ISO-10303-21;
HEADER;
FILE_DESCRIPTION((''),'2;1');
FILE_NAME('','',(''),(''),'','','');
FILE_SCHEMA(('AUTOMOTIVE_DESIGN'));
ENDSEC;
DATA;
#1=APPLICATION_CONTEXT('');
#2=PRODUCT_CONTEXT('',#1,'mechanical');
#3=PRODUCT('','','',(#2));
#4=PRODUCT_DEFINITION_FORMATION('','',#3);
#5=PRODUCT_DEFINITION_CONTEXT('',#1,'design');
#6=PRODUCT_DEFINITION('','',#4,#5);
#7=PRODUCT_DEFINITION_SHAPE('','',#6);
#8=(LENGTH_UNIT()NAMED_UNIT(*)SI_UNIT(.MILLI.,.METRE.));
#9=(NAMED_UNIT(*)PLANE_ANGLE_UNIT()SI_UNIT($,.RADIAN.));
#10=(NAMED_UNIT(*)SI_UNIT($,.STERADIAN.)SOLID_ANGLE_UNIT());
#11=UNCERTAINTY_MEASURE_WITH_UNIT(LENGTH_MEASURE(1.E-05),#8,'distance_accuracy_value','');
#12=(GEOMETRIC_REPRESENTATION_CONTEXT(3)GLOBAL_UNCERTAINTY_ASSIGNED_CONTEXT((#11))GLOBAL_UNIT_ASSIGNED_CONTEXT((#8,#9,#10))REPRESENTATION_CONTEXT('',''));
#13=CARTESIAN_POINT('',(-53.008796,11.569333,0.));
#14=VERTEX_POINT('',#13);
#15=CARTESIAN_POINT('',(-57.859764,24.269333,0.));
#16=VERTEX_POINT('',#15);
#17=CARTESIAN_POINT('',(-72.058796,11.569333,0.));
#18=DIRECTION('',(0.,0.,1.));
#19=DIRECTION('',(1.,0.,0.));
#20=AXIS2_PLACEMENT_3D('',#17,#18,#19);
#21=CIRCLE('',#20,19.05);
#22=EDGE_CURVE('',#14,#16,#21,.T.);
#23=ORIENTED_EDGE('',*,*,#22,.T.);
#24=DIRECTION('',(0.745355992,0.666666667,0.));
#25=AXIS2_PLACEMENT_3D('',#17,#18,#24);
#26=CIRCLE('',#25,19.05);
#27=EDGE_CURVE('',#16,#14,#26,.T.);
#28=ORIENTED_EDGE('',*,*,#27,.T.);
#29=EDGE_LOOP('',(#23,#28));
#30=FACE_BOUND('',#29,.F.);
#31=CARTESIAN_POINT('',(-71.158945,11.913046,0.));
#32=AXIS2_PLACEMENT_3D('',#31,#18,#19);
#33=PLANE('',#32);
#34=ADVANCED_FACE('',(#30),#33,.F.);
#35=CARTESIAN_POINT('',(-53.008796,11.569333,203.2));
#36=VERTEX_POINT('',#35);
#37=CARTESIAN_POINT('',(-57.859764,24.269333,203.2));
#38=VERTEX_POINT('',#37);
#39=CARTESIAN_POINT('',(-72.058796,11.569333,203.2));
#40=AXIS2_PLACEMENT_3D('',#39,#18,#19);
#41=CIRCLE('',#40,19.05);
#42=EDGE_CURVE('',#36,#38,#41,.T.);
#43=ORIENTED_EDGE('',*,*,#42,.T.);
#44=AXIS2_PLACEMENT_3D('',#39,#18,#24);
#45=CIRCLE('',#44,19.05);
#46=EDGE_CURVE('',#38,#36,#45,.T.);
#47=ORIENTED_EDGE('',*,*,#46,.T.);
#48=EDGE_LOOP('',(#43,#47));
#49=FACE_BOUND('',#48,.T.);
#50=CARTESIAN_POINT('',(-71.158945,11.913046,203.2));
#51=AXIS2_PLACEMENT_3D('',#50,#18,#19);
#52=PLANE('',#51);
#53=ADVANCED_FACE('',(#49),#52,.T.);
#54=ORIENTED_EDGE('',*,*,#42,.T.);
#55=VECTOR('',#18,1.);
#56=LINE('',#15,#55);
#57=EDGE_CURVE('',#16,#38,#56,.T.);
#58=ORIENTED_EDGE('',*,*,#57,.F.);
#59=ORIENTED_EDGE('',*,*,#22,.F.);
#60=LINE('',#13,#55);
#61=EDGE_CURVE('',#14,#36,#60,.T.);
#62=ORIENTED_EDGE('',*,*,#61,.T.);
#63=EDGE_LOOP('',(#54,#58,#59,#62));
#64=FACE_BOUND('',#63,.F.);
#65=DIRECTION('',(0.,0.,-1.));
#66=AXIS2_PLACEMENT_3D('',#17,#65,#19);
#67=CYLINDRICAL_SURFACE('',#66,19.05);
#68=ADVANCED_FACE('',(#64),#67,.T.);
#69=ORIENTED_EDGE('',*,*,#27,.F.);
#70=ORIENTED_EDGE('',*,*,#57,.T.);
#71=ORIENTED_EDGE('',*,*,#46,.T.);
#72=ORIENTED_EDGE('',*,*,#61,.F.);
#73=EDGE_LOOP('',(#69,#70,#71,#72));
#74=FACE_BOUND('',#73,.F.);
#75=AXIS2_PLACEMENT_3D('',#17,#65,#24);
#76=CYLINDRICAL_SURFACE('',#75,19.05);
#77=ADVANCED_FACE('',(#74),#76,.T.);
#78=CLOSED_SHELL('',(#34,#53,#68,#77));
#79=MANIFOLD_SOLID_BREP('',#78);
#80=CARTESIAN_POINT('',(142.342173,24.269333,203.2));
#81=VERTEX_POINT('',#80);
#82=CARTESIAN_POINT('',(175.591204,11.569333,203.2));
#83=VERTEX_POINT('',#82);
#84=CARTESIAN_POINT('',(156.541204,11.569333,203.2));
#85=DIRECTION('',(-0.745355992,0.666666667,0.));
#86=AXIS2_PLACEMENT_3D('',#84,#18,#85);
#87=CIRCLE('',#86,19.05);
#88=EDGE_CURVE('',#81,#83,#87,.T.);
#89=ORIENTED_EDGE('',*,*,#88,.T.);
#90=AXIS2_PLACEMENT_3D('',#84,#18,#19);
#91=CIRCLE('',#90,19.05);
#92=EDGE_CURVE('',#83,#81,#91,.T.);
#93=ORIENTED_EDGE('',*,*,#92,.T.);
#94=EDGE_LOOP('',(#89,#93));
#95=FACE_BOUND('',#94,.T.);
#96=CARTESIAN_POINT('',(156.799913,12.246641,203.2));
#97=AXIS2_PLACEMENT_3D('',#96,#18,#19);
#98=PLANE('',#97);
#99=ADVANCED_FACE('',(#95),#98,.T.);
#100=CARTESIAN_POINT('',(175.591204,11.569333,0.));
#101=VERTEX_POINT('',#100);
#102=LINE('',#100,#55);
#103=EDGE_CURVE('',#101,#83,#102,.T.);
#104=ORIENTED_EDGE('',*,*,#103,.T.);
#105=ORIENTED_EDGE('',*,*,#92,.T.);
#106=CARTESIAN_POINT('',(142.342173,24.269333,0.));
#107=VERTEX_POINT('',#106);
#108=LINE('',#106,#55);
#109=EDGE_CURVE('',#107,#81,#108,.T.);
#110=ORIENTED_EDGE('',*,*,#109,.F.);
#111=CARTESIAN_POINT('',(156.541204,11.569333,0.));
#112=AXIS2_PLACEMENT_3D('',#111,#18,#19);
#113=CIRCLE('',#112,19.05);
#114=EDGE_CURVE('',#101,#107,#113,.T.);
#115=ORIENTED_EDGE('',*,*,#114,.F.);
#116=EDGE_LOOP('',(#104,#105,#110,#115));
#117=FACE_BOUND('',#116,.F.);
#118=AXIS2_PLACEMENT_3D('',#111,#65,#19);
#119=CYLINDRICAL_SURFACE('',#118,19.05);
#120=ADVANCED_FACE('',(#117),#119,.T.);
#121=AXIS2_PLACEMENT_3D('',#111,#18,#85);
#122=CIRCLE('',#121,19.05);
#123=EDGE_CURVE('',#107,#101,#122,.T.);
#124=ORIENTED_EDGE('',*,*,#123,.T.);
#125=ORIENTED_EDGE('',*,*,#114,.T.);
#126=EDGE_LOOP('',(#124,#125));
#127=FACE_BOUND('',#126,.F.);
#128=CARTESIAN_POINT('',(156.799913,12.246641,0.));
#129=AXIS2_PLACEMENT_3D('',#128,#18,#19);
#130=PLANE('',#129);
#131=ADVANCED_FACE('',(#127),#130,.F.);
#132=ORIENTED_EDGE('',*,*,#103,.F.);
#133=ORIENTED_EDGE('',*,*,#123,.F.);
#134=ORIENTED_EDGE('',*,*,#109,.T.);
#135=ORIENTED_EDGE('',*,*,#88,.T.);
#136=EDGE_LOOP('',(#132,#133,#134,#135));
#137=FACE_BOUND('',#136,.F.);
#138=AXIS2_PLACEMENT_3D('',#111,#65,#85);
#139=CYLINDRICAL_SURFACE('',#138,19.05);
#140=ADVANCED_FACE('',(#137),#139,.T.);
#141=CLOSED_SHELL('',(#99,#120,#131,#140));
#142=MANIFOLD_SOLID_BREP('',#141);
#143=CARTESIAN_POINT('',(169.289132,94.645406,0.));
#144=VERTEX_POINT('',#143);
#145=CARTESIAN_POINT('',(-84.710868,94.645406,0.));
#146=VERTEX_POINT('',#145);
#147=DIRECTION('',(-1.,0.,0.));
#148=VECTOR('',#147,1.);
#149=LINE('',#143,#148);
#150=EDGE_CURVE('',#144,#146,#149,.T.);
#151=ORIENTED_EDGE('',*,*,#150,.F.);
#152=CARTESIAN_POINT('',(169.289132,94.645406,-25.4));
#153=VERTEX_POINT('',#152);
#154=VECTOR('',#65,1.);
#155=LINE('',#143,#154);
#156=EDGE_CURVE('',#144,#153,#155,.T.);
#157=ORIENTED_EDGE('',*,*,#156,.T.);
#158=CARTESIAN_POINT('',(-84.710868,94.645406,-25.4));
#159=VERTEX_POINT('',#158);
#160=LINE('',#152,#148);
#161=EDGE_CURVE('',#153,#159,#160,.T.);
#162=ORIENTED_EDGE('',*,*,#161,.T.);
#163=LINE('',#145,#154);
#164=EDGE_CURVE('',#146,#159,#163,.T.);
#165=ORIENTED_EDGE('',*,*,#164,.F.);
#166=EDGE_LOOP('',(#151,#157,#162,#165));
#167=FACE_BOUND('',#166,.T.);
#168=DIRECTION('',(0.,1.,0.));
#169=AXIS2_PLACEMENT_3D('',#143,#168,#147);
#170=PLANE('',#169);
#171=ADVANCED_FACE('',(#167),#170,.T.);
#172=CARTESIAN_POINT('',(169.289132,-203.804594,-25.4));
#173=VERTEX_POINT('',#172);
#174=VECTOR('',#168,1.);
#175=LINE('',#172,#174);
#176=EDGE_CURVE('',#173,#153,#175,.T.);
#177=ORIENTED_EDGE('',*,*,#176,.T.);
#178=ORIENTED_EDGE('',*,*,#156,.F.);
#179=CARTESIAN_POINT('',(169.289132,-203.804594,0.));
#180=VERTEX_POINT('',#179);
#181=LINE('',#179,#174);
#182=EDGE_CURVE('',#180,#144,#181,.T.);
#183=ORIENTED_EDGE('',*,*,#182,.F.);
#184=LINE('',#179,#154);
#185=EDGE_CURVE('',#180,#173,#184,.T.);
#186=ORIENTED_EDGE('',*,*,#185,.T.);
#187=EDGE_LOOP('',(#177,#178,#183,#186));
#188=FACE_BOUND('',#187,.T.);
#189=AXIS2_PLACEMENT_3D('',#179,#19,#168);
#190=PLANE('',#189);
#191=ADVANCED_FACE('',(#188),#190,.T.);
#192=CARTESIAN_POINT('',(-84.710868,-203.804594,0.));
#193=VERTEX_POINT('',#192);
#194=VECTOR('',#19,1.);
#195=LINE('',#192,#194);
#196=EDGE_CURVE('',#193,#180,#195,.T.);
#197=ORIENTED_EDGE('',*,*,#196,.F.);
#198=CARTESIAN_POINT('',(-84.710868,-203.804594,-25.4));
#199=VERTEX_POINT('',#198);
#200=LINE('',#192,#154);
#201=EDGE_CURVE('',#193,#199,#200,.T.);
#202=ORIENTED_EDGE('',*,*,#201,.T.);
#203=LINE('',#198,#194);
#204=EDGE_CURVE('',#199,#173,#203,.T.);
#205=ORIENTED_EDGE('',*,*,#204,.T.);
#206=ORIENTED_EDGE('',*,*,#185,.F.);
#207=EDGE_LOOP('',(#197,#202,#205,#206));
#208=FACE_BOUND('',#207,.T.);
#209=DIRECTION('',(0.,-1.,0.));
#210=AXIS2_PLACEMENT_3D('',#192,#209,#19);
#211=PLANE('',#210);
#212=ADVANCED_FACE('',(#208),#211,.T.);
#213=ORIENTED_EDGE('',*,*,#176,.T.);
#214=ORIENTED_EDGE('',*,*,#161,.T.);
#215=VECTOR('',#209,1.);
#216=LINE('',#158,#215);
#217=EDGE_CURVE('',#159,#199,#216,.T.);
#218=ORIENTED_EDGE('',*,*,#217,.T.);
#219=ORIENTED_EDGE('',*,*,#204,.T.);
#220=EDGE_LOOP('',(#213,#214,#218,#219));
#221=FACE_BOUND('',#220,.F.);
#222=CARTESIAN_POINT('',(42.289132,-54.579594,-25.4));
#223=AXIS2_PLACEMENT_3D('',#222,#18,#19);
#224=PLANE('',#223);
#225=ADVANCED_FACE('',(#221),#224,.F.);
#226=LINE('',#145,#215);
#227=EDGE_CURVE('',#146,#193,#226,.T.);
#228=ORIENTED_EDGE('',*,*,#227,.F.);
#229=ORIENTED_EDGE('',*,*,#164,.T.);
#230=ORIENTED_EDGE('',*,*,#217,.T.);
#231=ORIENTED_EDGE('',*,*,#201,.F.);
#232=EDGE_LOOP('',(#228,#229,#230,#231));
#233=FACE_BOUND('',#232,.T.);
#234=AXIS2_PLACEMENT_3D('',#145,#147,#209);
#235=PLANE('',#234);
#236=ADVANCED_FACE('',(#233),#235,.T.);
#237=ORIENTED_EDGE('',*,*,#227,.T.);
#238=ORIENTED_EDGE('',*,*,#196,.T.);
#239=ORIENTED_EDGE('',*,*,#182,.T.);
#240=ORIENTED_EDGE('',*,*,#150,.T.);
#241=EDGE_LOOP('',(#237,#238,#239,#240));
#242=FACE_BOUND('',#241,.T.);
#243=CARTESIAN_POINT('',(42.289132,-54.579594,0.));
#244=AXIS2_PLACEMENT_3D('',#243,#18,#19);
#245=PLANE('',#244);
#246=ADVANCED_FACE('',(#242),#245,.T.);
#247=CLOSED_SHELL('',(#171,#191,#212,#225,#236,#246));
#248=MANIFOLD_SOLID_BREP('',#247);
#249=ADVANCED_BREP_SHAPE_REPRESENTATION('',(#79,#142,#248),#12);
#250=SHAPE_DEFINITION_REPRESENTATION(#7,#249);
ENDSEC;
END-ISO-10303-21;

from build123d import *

# Parameters (mm, degrees)
F1_DEPTH = 203.2
F2_R     = 3.9466394405
F3_DEPTH = 25.4


# Not quite as in the source:
# - the program builds the solid bodies; features that only make, move or delete a surface that nothing else refers to are left out


with BuildPart() as f1:
    # F0 (on Top) → F1 (new body)
    with BuildSketch(Plane.XY):
        with BuildLine():
            ThreePointArc((175.5912042022, 11.5693333262), (163.3386650124, 29.3653167645), (142.3421725451, 24.2693333262))
            ThreePointArc((142.3421725451, 24.2693333262), (149.743743392, -6.226650112), (175.5912042022, 11.5693333262))
        make_face()
    extrude(amount=F1_DEPTH)


with BuildPart() as f1b:
    # F0 (on Top) → F1, piece 2 (new body)
    with BuildSketch(Plane.XY):
        with BuildLine():
            ThreePointArc((-53.0087957978, 11.5693333262), (-54.2628123596, 18.3667941364), (-57.8597641407, 24.2693333262))
            ThreePointArc((-57.8597641407, 24.2693333262), (-89.8547792361, 4.771872516), (-53.0087957978, 11.5693333262))
        make_face()
    extrude(amount=F1_DEPTH)


with BuildPart() as f3:
    # F2 (on Top) → F3 (new body)
    with BuildSketch(Plane.XY):
        Polygon((169.2891323054, -203.8045942991), (169.2891323054, 18.4454057009), (169.2891323054, 94.6454057009), (37.2091323054, 94.6454057009), (-84.7108676946, 94.6454057009), (-84.7108676946, 18.4454057009), (-84.7108676946, -203.8045942991), align=None)
        with Locations((42.2891323054, 0)):
            Circle(F2_R, mode=Mode.SUBTRACT)
        with Locations((42.2891323054, 0)):
            Circle(F2_R)
    extrude(amount=-F3_DEPTH)


solid = Compound([f1.part, f1b.part, f3.part])
